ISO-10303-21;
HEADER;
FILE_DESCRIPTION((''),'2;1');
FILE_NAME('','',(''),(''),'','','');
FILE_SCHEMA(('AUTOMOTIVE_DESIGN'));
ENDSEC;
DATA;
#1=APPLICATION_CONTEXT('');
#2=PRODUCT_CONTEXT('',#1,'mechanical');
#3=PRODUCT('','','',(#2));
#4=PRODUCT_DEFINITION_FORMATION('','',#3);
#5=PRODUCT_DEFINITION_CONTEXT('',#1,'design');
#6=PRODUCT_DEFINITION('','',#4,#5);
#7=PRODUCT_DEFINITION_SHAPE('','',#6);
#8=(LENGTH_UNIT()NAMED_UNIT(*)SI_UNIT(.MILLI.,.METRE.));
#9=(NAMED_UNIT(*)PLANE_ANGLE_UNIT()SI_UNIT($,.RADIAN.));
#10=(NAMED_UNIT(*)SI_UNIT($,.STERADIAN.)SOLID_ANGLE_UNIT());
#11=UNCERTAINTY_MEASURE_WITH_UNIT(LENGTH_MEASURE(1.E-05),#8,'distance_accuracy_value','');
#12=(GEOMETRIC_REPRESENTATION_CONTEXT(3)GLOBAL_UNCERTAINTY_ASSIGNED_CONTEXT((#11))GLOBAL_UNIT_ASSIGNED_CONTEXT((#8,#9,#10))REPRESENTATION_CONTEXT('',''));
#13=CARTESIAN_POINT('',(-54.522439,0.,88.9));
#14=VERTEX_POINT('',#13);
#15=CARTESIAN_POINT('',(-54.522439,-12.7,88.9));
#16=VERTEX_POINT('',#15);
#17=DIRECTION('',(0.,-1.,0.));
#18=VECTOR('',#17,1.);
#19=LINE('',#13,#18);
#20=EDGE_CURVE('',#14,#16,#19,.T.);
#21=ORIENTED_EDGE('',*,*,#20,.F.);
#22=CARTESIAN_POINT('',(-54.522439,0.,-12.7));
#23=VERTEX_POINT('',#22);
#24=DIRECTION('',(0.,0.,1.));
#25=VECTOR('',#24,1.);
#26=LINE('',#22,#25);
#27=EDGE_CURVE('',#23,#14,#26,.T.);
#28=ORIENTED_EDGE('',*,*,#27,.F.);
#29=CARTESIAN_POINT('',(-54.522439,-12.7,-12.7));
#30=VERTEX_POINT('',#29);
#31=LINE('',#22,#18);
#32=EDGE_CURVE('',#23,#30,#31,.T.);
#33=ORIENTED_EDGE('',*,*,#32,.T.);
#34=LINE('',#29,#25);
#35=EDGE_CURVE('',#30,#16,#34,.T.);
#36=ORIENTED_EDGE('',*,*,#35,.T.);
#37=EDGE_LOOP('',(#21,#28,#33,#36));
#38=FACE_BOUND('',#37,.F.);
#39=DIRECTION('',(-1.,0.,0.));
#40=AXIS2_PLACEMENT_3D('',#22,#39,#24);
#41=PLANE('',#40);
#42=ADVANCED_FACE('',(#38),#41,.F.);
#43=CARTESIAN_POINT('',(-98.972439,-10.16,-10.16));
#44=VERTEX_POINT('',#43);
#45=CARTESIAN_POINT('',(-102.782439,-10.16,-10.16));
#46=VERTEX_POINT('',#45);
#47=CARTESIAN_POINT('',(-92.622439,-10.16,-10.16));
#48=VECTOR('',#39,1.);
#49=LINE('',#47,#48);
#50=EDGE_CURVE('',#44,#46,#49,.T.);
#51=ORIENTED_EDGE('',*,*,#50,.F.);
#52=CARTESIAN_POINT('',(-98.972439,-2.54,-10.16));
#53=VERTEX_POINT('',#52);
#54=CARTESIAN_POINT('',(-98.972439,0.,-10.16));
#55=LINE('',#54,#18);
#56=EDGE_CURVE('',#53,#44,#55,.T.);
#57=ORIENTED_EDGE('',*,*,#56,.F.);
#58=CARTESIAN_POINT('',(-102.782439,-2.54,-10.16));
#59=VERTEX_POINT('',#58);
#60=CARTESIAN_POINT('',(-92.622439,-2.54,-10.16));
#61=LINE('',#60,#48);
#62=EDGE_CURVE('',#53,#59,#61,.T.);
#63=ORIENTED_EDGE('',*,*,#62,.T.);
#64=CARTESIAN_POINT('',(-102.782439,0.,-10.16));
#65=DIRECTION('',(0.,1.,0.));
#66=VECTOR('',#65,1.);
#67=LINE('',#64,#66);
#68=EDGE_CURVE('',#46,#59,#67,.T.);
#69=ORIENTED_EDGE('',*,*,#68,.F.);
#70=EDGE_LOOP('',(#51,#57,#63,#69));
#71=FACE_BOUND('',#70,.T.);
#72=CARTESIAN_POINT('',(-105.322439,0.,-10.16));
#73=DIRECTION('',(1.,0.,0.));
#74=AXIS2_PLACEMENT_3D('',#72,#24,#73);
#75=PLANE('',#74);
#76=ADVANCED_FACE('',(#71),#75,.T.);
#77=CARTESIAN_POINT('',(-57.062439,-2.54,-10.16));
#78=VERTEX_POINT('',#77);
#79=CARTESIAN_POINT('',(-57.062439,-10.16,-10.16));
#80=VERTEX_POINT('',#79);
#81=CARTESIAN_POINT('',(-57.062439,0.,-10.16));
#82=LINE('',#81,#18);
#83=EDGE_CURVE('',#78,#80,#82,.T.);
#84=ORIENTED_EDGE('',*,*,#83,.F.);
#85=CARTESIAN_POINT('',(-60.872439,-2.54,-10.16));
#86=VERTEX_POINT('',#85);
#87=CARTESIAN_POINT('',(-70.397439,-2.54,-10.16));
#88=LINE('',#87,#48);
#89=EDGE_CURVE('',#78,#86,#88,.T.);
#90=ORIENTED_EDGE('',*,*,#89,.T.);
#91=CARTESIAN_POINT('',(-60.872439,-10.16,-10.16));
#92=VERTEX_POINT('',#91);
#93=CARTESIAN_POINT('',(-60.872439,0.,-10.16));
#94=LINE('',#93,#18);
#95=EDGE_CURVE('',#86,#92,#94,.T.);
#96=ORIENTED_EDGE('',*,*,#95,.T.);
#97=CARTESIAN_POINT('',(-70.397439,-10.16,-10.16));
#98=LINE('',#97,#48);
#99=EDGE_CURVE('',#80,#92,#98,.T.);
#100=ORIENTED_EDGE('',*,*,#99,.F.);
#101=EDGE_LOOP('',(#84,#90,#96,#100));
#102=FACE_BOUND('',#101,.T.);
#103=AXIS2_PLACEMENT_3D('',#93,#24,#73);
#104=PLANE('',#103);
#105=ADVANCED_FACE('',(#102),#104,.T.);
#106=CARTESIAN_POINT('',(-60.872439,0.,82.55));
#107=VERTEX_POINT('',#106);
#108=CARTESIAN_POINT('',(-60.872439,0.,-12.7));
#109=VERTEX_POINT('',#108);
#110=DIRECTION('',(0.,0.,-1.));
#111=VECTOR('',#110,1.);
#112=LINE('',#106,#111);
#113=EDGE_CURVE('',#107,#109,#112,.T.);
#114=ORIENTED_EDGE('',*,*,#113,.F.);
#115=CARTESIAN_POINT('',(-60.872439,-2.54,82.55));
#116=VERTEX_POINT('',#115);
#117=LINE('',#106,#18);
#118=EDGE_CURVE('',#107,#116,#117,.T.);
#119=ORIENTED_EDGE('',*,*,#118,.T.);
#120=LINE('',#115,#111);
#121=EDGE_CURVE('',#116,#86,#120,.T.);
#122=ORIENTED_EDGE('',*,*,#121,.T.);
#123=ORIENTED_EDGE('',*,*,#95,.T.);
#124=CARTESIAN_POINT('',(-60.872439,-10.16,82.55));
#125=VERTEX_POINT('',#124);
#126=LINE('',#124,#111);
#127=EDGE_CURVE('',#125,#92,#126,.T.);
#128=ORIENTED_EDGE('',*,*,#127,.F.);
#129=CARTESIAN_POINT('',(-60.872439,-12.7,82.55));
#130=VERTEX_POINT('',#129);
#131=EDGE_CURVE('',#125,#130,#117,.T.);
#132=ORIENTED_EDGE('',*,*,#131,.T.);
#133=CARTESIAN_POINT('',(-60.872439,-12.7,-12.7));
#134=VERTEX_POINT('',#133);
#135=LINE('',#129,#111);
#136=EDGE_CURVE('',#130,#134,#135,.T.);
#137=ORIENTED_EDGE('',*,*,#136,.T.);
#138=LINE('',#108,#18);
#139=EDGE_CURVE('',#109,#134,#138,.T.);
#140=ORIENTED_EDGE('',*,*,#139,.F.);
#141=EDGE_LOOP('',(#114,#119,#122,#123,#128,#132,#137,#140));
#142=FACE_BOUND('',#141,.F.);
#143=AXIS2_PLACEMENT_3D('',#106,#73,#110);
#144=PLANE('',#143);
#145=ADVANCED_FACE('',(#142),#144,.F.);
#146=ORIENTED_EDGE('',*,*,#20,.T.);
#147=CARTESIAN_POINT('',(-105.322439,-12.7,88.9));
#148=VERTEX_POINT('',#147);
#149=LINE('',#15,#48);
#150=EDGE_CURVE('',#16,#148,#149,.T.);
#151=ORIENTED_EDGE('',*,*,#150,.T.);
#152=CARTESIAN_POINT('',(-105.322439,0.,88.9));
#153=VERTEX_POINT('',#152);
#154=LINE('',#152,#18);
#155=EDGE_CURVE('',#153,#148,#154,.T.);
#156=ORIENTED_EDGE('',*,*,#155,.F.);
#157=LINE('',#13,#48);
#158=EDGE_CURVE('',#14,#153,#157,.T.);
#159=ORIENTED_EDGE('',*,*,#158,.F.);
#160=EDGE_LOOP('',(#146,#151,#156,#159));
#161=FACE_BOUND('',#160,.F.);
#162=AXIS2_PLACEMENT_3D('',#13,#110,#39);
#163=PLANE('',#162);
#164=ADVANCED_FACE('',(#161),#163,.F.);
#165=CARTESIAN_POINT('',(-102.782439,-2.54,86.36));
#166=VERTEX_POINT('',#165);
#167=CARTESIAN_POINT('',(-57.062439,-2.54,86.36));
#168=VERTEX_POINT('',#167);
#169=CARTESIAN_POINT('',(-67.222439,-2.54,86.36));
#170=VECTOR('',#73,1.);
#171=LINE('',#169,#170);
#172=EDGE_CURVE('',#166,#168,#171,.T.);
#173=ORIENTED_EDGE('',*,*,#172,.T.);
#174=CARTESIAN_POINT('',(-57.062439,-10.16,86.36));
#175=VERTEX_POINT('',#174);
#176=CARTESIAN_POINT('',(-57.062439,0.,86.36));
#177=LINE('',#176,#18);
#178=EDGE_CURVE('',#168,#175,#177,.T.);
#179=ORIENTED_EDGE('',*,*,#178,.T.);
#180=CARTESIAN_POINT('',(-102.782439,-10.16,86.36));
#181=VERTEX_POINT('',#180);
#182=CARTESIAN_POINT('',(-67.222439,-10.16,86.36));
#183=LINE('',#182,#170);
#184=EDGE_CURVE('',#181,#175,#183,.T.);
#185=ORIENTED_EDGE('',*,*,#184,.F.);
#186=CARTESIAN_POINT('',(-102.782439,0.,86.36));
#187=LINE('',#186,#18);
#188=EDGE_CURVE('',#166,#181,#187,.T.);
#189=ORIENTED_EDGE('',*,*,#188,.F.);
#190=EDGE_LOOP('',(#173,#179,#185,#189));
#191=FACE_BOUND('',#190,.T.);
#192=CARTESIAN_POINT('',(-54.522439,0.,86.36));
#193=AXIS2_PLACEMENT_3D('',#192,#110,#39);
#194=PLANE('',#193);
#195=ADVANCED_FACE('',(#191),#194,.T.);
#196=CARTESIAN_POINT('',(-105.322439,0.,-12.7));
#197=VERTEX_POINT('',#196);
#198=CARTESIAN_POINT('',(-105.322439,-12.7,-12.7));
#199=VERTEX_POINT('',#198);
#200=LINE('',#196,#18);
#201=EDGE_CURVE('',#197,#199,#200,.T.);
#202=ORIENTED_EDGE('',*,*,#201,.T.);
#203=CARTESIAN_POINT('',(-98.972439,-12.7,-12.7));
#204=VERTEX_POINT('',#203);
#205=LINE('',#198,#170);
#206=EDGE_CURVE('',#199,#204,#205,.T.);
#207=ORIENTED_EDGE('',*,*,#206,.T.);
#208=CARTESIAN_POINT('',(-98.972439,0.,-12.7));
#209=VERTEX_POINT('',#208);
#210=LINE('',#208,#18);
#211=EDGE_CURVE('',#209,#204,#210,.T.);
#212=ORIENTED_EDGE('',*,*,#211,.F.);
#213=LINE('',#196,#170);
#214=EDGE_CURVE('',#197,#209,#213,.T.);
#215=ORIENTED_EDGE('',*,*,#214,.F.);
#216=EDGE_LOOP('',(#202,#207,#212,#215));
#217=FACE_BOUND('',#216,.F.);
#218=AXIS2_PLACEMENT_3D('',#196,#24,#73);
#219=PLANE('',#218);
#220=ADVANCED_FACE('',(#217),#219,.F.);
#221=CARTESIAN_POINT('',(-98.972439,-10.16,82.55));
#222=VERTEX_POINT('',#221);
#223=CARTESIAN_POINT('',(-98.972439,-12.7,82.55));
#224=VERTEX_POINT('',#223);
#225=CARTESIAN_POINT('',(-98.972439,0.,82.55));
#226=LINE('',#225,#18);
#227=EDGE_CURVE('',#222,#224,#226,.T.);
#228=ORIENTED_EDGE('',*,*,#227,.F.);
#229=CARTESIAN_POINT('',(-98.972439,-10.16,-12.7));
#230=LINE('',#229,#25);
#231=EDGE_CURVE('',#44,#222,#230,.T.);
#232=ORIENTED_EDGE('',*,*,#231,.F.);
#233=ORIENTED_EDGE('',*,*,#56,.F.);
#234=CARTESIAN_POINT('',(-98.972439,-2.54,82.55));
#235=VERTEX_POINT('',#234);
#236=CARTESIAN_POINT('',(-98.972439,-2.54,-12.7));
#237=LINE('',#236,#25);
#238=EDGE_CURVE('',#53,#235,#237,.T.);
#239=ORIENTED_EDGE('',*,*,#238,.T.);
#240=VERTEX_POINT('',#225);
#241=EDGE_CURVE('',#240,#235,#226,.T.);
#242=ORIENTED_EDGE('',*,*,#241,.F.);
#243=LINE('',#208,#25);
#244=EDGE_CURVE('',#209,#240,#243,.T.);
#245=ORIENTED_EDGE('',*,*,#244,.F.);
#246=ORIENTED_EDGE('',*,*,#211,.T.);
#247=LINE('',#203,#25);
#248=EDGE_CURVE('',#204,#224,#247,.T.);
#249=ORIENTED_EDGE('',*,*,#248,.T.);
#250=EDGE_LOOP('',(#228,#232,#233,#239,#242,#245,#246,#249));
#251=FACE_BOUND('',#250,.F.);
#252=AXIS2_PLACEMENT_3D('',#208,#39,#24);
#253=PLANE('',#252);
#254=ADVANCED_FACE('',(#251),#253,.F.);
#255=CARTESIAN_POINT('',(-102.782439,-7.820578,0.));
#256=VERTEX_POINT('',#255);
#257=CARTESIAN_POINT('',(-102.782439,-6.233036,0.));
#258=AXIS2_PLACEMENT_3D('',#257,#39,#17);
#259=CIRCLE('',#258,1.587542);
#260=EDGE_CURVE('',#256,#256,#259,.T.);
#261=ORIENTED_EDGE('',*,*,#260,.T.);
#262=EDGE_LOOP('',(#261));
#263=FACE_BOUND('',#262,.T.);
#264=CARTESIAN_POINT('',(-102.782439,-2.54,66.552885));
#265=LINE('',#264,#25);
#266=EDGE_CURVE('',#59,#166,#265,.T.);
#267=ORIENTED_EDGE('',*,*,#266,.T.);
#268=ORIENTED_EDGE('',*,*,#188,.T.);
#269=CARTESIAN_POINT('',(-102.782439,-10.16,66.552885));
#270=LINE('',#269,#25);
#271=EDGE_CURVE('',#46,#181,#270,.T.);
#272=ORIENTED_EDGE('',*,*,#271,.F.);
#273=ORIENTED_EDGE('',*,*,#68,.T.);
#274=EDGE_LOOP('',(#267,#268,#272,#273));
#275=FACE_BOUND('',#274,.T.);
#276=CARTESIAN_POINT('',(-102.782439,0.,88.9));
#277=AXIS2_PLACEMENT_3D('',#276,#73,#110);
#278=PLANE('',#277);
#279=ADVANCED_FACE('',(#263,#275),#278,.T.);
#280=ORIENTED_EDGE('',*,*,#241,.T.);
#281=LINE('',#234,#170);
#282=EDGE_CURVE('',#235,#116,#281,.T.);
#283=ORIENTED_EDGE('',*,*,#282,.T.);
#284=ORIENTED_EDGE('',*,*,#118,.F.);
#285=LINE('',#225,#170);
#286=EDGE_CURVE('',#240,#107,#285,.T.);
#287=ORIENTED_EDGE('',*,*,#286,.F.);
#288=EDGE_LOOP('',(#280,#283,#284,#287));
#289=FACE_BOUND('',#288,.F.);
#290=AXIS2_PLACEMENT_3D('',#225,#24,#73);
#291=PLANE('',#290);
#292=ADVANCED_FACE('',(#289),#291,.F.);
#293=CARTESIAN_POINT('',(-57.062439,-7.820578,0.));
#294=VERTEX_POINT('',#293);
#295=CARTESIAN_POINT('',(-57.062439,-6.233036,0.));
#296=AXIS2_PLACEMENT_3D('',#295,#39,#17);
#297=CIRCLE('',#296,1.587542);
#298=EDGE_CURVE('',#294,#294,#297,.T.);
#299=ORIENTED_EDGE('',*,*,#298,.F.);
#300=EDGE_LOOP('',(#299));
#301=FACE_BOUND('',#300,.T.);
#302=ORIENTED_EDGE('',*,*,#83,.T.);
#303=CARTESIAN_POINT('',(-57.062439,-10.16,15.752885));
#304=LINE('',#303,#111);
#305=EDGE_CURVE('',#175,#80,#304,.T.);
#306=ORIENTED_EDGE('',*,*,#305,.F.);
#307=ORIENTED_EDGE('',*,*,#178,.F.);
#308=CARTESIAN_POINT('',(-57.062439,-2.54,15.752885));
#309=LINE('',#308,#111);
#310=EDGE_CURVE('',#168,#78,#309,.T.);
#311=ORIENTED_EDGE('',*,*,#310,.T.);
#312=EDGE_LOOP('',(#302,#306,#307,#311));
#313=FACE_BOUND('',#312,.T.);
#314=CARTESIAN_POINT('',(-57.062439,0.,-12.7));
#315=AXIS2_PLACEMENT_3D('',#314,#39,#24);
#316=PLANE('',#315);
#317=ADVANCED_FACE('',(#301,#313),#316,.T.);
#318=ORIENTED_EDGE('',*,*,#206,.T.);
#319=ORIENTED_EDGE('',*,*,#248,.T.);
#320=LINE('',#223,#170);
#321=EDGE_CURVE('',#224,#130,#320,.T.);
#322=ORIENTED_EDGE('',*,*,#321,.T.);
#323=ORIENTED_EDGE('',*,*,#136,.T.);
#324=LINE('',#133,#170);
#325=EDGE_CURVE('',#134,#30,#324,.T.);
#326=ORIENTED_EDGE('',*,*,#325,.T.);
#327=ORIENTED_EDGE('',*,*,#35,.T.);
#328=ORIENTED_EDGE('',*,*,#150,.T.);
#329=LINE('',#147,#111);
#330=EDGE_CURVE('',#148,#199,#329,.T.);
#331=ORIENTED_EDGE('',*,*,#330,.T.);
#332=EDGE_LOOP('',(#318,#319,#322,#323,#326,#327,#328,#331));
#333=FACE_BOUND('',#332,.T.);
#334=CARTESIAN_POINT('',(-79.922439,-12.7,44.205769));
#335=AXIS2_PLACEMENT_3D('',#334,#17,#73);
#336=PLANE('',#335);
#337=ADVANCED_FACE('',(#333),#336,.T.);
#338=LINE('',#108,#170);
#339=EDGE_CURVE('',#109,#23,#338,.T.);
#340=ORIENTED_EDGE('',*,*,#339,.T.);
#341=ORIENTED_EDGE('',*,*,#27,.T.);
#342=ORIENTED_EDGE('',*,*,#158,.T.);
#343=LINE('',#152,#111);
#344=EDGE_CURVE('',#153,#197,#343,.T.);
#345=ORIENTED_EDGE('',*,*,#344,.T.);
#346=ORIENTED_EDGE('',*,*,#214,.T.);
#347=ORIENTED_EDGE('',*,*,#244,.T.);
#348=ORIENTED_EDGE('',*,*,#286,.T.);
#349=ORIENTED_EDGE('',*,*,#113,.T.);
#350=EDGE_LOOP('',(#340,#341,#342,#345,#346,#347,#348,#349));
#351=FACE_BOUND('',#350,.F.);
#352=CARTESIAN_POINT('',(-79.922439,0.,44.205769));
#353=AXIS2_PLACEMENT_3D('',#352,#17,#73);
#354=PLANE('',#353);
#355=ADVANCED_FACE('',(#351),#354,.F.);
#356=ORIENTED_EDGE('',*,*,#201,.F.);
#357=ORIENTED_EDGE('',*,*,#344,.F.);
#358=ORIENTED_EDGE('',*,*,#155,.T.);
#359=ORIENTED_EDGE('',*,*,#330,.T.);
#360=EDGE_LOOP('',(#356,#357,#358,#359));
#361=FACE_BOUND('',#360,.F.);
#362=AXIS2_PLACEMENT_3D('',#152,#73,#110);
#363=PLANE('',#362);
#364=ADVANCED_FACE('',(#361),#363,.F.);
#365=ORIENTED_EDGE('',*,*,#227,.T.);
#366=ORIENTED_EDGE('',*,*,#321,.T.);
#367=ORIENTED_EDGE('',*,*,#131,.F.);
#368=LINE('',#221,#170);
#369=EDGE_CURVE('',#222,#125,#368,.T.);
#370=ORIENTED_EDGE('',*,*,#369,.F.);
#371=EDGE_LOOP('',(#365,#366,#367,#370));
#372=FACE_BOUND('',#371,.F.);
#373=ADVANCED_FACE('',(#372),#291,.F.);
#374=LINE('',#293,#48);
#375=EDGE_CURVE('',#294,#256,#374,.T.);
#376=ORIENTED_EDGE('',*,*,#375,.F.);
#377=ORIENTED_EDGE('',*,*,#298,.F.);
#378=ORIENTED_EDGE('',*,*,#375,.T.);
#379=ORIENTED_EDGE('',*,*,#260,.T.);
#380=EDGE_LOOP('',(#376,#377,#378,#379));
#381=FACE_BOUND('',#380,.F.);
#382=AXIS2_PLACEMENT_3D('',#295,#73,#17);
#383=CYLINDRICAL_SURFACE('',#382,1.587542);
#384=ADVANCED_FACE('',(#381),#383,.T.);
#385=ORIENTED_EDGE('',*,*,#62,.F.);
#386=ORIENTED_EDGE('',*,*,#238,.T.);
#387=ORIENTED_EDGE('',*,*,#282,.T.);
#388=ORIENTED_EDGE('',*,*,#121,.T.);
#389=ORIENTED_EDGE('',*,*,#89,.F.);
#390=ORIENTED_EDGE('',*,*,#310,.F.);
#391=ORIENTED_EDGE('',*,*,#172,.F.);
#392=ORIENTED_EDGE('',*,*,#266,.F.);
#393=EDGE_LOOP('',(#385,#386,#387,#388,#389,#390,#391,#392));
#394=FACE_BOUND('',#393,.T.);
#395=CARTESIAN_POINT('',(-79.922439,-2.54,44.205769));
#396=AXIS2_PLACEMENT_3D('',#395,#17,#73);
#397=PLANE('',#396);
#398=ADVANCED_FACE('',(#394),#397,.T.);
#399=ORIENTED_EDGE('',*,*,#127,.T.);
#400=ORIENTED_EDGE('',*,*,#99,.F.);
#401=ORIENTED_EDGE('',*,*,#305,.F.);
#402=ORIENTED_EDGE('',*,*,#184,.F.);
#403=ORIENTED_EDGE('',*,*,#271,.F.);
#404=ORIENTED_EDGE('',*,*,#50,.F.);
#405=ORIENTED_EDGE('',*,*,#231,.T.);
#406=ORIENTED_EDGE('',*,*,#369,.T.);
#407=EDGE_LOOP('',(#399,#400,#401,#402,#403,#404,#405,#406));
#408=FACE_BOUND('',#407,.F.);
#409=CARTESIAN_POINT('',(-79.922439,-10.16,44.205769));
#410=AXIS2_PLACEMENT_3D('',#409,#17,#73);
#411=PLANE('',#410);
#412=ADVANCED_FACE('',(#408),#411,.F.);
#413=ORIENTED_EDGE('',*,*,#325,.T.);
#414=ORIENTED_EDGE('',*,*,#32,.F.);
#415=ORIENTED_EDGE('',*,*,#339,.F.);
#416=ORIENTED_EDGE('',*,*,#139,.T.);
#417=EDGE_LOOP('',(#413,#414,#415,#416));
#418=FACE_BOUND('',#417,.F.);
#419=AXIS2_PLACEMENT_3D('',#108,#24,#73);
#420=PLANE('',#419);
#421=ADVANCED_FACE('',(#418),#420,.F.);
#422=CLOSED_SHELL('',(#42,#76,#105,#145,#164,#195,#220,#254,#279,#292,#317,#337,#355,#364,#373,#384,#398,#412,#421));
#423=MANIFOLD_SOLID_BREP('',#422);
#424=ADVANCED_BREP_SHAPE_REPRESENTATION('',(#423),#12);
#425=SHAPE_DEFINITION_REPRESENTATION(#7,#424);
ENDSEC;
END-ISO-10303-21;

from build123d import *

# Parameters (mm, degrees)
F1_DEPTH = 12.7
F2_T     = -2.54
F3_R     = 1.5875418941
F4_DEPTH = 45.72


# Not quite as in the source:
# - a feature names something its author has since deleted; it is built from what else it names


with BuildPart() as f1:
    # F0 (on Front) → F1 (new body)
    with BuildSketch(Plane.XZ):
        Polygon((-105.322439312, 88.9), (-105.322439312, -12.7), (-98.972439312, -12.7), (-98.972439312, 0), (-98.972439312, 82.55), (-60.872439312, 82.55), (-60.872439312, 0), (-60.872439312, -12.7), (-54.522439312, -12.7), (-54.522439312, 88.9), align=None)
    extrude(amount=F1_DEPTH)

    # F2
    f2_openings = [f1.faces().sort_by_distance(p)[0] for p in [
        (-60.872439, -6.35, 34.925),
        (-79.922439, -6.35, 82.55),
        (-98.972439, -6.35, 34.925),
    ]]
    offset(amount=F2_T, openings=f2_openings)

    # F3 (on face) → F4 (join)
    with BuildSketch(Plane(origin=(-57.062439312, 0, 0), x_dir=(0, -1, 0), z_dir=(-1, 0, 0))):
        with Locations((6.2330360524, 0)):
            Circle(F3_R)
    extrude(amount=F4_DEPTH)


solid = f1.part
